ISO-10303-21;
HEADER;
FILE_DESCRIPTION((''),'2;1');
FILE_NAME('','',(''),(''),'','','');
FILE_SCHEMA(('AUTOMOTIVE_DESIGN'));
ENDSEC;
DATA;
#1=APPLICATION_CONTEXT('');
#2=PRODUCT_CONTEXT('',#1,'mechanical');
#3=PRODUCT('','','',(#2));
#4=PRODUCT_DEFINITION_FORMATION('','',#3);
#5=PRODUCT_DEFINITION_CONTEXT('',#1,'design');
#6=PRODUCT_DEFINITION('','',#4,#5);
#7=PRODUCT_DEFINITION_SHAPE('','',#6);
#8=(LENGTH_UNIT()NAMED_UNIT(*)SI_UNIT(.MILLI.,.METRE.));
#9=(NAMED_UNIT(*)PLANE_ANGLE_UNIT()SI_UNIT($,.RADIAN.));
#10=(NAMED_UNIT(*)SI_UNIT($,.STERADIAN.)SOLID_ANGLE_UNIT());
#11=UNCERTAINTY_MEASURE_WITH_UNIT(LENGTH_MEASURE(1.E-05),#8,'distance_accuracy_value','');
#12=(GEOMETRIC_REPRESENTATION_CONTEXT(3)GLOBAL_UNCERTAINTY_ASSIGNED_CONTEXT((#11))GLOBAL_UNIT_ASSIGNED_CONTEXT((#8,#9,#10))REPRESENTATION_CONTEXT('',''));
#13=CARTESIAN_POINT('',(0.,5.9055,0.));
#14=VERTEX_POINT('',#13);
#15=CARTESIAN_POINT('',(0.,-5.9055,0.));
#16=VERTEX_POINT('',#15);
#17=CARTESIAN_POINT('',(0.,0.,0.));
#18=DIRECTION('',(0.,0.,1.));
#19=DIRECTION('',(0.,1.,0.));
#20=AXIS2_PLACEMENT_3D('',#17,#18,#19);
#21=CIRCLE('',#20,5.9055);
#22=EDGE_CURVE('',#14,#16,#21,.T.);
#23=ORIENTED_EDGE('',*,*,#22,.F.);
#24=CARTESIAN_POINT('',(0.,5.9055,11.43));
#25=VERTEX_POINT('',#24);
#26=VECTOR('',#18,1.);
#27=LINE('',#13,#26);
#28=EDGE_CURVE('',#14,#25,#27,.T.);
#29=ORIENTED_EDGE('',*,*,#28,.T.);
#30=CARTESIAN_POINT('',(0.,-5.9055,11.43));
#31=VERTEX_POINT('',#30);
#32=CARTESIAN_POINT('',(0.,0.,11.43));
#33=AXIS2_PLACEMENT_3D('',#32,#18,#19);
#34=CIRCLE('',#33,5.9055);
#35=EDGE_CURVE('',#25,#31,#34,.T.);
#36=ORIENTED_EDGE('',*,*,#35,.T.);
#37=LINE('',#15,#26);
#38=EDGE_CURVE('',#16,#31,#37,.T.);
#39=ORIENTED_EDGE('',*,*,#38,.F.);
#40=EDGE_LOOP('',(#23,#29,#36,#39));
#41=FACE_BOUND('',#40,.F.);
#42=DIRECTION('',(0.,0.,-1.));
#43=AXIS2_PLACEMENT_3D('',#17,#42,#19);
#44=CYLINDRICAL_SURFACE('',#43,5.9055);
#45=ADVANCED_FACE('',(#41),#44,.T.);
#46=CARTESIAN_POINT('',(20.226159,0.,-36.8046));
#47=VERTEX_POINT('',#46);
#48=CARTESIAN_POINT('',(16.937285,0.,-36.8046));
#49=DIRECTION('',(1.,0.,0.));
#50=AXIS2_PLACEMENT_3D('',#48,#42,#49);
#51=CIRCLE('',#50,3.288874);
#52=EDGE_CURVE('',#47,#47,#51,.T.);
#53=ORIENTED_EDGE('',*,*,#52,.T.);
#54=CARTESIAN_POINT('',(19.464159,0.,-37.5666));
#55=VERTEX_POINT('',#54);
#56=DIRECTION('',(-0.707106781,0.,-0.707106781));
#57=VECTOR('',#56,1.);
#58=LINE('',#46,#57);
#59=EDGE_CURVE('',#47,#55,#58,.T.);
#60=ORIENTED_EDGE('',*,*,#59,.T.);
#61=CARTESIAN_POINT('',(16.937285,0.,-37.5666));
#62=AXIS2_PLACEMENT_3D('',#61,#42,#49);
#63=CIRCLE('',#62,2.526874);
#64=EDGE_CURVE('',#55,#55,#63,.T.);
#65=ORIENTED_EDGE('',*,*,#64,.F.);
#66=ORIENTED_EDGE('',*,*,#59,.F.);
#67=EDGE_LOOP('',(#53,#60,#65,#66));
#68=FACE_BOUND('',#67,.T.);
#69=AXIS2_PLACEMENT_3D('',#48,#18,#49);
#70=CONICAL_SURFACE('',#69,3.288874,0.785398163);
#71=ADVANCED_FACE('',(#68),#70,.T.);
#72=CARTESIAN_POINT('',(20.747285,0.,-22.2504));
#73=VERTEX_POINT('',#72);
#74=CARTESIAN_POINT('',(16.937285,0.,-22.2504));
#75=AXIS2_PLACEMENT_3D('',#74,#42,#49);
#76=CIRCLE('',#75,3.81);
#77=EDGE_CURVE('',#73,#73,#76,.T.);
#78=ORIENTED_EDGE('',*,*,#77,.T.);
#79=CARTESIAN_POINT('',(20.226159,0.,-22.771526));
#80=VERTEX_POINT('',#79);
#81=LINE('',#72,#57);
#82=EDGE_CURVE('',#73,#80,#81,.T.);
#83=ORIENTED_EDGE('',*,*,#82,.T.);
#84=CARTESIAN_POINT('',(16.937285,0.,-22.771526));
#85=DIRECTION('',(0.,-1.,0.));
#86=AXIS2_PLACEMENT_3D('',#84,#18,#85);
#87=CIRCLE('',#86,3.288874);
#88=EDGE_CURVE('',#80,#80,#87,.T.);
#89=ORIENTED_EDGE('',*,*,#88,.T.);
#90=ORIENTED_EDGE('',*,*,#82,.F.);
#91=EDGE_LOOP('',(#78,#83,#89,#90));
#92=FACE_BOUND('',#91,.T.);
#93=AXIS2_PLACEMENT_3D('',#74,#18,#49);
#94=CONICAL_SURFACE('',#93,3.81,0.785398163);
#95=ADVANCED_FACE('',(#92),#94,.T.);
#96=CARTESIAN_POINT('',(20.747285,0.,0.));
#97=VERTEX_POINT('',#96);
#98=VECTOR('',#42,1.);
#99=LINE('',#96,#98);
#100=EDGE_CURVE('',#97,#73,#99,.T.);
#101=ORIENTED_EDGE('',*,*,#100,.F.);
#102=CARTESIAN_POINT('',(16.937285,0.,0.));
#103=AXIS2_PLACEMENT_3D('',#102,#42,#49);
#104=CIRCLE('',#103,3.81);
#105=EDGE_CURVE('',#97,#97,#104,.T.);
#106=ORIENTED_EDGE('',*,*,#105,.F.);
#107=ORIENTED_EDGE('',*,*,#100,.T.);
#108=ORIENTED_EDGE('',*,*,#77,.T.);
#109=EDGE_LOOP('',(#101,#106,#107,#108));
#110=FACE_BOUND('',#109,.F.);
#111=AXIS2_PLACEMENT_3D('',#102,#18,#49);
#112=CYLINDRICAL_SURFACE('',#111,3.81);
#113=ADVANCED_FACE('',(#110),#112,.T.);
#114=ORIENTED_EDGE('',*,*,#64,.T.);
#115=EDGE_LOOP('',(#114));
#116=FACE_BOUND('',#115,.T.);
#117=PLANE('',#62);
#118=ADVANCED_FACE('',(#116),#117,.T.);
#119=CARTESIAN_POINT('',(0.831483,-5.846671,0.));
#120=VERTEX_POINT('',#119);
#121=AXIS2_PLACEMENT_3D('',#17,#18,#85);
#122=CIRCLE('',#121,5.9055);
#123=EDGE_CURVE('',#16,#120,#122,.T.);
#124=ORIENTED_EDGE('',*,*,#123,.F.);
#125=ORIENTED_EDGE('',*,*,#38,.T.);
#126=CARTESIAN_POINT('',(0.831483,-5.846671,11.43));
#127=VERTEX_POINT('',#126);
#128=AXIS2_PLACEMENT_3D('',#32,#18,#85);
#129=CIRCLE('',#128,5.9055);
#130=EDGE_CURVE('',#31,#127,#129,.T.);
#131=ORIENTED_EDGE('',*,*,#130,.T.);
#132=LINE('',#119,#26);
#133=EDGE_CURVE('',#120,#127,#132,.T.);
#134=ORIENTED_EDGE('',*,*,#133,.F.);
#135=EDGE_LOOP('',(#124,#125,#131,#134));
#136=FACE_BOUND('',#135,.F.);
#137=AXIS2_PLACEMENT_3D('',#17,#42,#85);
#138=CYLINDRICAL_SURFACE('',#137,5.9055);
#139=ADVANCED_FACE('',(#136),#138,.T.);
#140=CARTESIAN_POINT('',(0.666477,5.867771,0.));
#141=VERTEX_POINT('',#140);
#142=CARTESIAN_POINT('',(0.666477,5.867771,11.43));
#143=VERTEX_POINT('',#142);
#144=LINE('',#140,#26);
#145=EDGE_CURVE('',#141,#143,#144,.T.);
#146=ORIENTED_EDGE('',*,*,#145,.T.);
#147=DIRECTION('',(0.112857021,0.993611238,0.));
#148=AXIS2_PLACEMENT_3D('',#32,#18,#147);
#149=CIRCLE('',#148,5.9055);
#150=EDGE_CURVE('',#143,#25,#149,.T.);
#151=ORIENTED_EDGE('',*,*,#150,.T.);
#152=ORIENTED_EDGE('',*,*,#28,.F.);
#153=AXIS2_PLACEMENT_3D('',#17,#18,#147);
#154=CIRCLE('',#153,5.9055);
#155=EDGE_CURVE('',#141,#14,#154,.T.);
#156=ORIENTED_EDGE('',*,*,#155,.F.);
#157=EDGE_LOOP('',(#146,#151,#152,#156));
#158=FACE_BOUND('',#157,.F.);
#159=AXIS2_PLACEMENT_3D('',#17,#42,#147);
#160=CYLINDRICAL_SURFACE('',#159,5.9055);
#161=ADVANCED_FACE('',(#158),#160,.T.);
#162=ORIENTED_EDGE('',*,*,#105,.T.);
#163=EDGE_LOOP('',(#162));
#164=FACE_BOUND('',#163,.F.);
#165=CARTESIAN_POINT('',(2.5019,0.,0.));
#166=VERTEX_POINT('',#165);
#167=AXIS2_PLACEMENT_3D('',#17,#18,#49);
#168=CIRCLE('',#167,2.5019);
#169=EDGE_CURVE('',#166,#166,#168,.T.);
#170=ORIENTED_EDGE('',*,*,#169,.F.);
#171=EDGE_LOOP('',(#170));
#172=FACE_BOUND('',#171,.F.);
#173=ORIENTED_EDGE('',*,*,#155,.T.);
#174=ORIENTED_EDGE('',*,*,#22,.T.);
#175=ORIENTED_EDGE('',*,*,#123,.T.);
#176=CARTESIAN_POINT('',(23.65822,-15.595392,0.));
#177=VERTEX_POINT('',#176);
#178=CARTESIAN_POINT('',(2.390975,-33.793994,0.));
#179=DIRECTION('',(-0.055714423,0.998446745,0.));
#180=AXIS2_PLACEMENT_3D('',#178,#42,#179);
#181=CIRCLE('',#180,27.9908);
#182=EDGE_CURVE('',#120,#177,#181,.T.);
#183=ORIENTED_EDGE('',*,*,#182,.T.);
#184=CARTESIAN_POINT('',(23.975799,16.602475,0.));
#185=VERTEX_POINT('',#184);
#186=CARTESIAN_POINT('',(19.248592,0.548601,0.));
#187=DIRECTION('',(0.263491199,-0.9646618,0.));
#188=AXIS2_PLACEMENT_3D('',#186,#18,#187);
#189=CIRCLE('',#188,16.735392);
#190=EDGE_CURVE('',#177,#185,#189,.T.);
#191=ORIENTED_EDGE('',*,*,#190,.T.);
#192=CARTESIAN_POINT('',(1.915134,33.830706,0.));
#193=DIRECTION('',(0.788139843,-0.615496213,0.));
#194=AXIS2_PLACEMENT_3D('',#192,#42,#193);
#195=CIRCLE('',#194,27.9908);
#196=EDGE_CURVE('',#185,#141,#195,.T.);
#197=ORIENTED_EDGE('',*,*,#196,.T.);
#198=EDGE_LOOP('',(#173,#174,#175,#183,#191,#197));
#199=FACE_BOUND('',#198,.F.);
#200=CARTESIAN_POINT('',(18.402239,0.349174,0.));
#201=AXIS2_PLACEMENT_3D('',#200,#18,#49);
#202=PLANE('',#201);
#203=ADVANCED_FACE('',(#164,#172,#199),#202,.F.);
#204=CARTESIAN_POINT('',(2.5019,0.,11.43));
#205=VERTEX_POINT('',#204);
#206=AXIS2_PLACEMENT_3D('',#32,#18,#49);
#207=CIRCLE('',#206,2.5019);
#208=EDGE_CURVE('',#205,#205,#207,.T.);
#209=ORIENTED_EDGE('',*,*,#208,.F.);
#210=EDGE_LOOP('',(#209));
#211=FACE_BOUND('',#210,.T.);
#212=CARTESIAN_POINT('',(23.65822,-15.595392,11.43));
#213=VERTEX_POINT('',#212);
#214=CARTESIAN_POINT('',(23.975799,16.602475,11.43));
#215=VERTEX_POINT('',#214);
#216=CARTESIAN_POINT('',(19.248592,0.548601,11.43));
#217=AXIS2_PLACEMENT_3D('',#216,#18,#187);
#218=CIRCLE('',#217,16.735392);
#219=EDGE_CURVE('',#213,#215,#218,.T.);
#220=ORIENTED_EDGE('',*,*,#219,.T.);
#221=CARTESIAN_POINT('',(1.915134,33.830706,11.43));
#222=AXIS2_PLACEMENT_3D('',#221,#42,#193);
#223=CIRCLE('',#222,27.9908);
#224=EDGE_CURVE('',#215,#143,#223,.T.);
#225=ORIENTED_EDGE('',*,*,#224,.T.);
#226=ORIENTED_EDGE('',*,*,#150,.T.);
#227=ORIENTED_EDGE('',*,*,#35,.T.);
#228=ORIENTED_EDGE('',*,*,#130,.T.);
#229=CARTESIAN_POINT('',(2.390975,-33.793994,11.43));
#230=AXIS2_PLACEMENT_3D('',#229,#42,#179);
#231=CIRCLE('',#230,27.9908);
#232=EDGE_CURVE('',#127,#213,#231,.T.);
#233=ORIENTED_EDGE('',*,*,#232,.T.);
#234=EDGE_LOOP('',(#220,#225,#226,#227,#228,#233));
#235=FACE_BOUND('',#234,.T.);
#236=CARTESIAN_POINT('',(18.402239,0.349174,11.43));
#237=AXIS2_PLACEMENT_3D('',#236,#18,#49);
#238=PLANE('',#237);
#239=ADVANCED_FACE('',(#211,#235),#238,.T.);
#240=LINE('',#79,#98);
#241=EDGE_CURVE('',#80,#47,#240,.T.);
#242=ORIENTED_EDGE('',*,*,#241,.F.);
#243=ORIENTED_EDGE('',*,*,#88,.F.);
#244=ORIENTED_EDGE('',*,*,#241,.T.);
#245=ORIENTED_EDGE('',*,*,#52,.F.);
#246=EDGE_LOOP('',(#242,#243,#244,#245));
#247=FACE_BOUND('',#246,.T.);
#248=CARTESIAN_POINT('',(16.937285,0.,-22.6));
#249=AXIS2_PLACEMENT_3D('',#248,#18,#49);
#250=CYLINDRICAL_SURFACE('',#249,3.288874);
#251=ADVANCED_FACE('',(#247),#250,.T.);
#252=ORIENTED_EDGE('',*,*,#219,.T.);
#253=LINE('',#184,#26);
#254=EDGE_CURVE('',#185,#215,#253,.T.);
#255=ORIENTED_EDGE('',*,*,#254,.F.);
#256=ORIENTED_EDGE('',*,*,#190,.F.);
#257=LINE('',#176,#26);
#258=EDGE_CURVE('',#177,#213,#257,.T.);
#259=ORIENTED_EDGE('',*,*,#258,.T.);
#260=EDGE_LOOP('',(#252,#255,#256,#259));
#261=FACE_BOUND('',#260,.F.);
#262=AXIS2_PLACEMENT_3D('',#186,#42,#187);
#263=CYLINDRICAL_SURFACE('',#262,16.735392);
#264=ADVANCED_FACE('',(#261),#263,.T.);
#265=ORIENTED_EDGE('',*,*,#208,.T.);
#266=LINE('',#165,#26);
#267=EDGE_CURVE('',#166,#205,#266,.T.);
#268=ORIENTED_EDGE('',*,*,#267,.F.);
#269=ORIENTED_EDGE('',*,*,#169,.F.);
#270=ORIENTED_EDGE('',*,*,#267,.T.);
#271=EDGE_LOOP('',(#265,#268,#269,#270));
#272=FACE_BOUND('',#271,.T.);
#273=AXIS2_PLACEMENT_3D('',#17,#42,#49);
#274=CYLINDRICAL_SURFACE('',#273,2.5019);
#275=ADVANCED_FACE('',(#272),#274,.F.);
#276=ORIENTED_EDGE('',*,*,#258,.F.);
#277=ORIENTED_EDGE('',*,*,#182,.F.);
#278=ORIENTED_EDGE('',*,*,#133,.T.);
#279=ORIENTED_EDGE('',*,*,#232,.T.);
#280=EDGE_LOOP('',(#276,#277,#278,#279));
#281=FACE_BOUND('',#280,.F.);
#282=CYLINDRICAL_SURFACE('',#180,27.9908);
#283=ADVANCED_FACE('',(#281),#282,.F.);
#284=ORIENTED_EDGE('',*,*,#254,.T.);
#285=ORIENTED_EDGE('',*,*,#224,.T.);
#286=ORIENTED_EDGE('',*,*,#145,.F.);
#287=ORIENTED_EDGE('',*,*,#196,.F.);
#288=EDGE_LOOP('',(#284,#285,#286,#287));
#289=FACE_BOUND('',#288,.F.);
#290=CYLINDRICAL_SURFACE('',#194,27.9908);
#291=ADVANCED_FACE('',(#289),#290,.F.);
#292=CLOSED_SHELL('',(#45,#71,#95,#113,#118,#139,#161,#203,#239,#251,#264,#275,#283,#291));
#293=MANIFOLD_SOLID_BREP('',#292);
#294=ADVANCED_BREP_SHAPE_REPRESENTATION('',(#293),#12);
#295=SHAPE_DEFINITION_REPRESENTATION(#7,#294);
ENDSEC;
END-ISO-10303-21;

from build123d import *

# Parameters (mm, degrees)
F0_R        = 2.5019
F1_DEPTH    = 11.43
F2_R        = 3.81
F3_DEPTH    = 23.0124
F4_R        = 3.2888740004
F5_DEPTH    = 14.5542
F6_S5_R     = 3.2888740004
F6_T6_DEPTH = 7
F7_SIZE     = 0.762


# Not quite as in the source:
# - a fillet or chamfer that OpenCascade refuses, or shapes differently, is made with other operations: its cross-section is extruded or revolved along the edge and cut away or added


with BuildPart() as f1:
    # F0 (on Top) → F1 (new body)
    with BuildSketch(Plane.XY):
        with BuildLine():
            ThreePointArc((23.9757987458, 16.602474899), (13.6238224038, 8.4064756981), (0.6664771358, 5.8677711678))
            ThreePointArc((0.6664771358, 5.8677711678), (4.4051566928, 3.9331316736), (5.9055, 0))
            ThreePointArc((5.9055, 0), (4.4601151914, -3.8706979641), (0.8314833277, -5.8466713372))
            ThreePointArc((0.8314833277, -5.8466713372), (13.3845311249, -8.052459978), (23.6582204203, -15.5953918211))
            ThreePointArc((23.6582204203, -15.5953918211), (35.9831697874, 0.3835426329), (23.9757987458, 16.602474899))
        make_face()
        with BuildLine():
            ThreePointArc((0.6664771358, 5.8677711678), (0.333126091, 5.8846486866), (0, 5.9055))
            ThreePointArc((0, 5.9055), (-5.9055, 0), (0, -5.9055))
            ThreePointArc((0, -5.9055), (0.4155226631, -5.8729903159), (0.8314833277, -5.8466713372))
            ThreePointArc((0.8314833277, -5.8466713372), (4.4601151914, -3.8706979641), (5.9055, 0))
            ThreePointArc((5.9055, 0), (4.4051566928, 3.9331316736), (0.6664771358, 5.8677711678))
        make_face()
        Circle(F0_R, mode=Mode.SUBTRACT)
        with BuildLine():
            ThreePointArc((0.6664771358, 5.8677711678), (0.3337720919, 5.8960602474), (0, 5.9055))
            ThreePointArc((0, 5.9055), (0.333126091, 5.8846486866), (0.6664771358, 5.8677711678))
        make_face()
        with BuildLine():
            ThreePointArc((0.8314833277, -5.8466713372), (0.4155226631, -5.8729903159), (0, -5.9055))
            ThreePointArc((0, -5.9055), (0.4167809184, -5.8907744751), (0.8314833277, -5.8466713372))
        make_face()
    extrude(amount=F1_DEPTH)

    # F2 (on face) → F3 (join)
    with BuildSketch(Plane(origin=(0, 0, 0), x_dir=(1, 0, 0), z_dir=(0, 0, -1))):
        with Locations((16.9372853817, 0)):
            Circle(F2_R)
    extrude(amount=F3_DEPTH)

    # F4 (on face) → F5 (join)
    with BuildSketch(Plane(origin=(0, 0, -23.0124), x_dir=(1, 0, 0), z_dir=(0, 0, -1))):
        with Locations((16.9372853817, 0)):
            Circle(F4_R)
    extrude(amount=F5_DEPTH)

    # F6: chamfer of 0.762 on 1 edges, made by hand


with BuildPart() as f6_tool2:
    # F6_s3 → F6_t4 (revolve)
    with BuildSketch(Plane.XZ):
        Polygon((20.7472853817, -22.2504), (19.9852853817, -23.0124), (20.7472853817, -23.0124), align=None)
    revolve(axis=Axis((16.9372853817, 0, -23.0124), (0, 0, -1)))

    # F6_s5 → F6_t6 (cut, symmetric)
    with BuildSketch(Plane.XY.offset(-22.6)):
        with Locations((16.9372853817, 0)):
            Circle(F6_S5_R)
    extrude(amount=F6_T6_DEPTH, both=True, mode=Mode.SUBTRACT)


with BuildPart() as f1_1:
    add(f1.part)

    # F6_t1: cut F6_tool2
    add(f6_tool2.part, mode=Mode.SUBTRACT)

    # F7
    f7_edges = [f1_1.edges().sort_by_distance(p)[0] for p in [
        (13.648411, 0, -37.5666),
    ]]
    chamfer(f7_edges, length=F7_SIZE)


solid = f1_1.part
